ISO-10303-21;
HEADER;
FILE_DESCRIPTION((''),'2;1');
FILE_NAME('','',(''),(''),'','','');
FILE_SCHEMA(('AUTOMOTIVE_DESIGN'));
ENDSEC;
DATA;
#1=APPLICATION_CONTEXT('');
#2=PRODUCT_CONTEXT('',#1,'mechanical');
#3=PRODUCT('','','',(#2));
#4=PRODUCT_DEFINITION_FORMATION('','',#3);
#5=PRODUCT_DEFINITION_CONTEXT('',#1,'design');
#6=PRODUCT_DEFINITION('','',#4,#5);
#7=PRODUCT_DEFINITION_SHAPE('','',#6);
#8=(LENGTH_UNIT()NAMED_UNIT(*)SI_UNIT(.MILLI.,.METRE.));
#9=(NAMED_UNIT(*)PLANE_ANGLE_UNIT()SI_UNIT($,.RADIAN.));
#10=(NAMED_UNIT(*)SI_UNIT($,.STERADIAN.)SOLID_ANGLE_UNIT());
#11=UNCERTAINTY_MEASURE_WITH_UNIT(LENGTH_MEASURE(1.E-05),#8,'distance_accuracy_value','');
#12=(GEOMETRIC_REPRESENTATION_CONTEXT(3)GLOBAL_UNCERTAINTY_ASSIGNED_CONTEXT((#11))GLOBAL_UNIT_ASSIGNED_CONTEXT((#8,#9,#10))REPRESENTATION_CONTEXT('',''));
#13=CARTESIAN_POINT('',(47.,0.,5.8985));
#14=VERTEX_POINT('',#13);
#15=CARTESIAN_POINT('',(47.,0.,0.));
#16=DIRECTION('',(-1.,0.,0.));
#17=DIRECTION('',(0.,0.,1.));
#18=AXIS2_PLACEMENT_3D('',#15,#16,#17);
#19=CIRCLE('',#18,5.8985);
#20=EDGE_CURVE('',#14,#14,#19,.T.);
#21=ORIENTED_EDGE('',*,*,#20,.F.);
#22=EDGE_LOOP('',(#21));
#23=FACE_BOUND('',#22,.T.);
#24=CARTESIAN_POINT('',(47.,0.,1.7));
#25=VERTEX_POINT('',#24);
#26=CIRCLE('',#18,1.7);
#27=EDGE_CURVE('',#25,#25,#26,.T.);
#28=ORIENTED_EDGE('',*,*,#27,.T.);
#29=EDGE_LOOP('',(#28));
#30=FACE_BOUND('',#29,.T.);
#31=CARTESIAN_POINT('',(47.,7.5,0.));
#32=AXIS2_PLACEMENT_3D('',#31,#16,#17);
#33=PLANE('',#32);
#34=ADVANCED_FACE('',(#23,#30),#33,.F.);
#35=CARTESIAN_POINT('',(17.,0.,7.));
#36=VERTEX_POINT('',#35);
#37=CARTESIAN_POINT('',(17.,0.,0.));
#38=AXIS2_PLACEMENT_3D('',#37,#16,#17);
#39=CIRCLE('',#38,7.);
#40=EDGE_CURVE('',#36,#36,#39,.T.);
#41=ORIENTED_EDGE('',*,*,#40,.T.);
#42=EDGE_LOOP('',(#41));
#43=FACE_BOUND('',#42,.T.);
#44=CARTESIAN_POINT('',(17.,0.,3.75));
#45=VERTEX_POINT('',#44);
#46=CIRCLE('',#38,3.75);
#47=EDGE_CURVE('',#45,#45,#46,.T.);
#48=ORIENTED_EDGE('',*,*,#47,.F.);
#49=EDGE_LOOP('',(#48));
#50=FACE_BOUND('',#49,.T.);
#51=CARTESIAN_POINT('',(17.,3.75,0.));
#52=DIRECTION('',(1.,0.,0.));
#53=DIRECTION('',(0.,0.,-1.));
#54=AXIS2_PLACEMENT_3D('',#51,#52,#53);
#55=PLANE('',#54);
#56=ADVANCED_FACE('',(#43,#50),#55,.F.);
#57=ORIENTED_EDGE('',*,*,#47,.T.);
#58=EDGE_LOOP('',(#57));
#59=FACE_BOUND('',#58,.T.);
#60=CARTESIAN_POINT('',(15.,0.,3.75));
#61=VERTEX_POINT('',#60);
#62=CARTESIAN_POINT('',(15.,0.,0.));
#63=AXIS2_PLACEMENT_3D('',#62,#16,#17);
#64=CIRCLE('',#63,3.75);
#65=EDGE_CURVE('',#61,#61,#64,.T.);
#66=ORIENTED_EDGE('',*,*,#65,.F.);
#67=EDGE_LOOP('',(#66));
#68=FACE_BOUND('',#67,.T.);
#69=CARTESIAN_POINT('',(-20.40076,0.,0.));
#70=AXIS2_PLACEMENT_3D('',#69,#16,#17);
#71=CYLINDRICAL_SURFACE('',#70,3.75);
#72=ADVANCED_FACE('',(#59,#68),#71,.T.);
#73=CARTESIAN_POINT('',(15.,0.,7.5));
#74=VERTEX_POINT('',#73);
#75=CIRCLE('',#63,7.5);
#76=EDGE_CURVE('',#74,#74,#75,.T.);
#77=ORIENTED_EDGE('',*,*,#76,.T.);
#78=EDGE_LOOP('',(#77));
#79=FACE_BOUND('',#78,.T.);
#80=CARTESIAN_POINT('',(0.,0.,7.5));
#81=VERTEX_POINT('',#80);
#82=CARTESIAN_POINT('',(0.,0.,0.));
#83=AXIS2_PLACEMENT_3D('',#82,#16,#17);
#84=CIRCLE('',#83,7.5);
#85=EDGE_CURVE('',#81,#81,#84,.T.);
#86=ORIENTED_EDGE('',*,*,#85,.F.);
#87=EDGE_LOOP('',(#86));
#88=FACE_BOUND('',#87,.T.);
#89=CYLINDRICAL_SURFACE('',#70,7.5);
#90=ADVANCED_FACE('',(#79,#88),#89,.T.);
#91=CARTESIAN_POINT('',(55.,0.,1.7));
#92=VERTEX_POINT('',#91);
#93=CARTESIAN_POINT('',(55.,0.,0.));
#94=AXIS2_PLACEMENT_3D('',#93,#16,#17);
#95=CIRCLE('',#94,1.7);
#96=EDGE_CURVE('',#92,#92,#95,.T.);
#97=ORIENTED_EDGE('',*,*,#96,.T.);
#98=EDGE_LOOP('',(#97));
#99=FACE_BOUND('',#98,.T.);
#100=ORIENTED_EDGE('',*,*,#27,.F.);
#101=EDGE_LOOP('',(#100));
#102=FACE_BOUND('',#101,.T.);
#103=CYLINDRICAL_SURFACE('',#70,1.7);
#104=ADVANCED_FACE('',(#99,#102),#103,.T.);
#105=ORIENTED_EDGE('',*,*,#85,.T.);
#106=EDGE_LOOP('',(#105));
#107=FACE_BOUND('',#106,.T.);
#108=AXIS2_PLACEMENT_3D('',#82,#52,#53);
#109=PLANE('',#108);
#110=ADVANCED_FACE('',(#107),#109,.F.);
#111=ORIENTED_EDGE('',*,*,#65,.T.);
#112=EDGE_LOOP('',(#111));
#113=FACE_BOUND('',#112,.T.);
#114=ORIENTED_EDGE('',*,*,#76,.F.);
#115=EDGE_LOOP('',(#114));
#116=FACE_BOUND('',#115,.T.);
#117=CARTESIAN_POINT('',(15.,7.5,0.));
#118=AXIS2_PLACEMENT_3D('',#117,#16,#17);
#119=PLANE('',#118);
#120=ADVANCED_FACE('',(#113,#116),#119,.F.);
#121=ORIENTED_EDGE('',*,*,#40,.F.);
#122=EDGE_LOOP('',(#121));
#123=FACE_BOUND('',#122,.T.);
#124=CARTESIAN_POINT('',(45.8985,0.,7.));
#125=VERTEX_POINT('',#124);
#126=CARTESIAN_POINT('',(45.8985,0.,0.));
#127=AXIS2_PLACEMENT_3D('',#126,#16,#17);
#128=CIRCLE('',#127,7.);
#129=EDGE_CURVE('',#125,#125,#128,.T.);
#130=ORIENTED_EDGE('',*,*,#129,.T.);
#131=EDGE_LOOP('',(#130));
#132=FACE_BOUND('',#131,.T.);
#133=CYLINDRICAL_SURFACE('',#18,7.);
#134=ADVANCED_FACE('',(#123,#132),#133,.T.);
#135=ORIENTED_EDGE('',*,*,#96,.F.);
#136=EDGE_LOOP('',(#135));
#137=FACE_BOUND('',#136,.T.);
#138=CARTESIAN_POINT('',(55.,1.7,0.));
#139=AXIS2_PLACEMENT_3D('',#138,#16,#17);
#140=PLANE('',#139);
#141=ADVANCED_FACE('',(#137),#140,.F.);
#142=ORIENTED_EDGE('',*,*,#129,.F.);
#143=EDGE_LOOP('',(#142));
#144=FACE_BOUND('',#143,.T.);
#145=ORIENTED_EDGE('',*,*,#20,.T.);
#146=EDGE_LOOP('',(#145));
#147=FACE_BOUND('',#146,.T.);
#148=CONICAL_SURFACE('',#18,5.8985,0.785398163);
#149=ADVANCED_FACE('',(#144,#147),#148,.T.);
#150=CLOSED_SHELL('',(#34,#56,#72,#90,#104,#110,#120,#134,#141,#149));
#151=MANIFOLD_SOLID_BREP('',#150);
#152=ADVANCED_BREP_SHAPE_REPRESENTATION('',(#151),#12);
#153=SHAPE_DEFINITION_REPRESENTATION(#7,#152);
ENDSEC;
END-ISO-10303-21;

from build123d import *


# Read off the part's stored shape, not the designer's step: M14x2.0 Machine Threads Stud1
with BuildPart() as part:
    # Sketch1 → Revolve1 (revolve)
    with BuildSketch(Plane.XY, mode=Mode.PRIVATE) as revolve1_sk:
        Polygon((0, 0), (0, 7.5), (15, 7.5), (15, 3.75), (17, 3.75), (17, 7.5), (47, 7.5), (47, 1.7), (55, 1.7), (55, 0), align=None)
    revolve(revolve1_sk.sketch.rotate(Axis((-20.400760227, 0, 0), (1, 0, 0)), 90), axis=Axis((-20.400760227, 0, 0), (1, 0, 0)))

    # M14x2.0 Machine Threads Stud1 outline → M14x2.0 Machine Threads Stud1 (revolve, cut)
    with BuildSketch(Plane.YX):
        Polygon((7.5, 47), (5.8985, 47), (7, 45.8985), (7, 17), (7.5, 17), align=None)
    revolve(axis=Axis((0, 0, 0), (1, 0, 0)), mode=Mode.SUBTRACT)


solid = part.part
